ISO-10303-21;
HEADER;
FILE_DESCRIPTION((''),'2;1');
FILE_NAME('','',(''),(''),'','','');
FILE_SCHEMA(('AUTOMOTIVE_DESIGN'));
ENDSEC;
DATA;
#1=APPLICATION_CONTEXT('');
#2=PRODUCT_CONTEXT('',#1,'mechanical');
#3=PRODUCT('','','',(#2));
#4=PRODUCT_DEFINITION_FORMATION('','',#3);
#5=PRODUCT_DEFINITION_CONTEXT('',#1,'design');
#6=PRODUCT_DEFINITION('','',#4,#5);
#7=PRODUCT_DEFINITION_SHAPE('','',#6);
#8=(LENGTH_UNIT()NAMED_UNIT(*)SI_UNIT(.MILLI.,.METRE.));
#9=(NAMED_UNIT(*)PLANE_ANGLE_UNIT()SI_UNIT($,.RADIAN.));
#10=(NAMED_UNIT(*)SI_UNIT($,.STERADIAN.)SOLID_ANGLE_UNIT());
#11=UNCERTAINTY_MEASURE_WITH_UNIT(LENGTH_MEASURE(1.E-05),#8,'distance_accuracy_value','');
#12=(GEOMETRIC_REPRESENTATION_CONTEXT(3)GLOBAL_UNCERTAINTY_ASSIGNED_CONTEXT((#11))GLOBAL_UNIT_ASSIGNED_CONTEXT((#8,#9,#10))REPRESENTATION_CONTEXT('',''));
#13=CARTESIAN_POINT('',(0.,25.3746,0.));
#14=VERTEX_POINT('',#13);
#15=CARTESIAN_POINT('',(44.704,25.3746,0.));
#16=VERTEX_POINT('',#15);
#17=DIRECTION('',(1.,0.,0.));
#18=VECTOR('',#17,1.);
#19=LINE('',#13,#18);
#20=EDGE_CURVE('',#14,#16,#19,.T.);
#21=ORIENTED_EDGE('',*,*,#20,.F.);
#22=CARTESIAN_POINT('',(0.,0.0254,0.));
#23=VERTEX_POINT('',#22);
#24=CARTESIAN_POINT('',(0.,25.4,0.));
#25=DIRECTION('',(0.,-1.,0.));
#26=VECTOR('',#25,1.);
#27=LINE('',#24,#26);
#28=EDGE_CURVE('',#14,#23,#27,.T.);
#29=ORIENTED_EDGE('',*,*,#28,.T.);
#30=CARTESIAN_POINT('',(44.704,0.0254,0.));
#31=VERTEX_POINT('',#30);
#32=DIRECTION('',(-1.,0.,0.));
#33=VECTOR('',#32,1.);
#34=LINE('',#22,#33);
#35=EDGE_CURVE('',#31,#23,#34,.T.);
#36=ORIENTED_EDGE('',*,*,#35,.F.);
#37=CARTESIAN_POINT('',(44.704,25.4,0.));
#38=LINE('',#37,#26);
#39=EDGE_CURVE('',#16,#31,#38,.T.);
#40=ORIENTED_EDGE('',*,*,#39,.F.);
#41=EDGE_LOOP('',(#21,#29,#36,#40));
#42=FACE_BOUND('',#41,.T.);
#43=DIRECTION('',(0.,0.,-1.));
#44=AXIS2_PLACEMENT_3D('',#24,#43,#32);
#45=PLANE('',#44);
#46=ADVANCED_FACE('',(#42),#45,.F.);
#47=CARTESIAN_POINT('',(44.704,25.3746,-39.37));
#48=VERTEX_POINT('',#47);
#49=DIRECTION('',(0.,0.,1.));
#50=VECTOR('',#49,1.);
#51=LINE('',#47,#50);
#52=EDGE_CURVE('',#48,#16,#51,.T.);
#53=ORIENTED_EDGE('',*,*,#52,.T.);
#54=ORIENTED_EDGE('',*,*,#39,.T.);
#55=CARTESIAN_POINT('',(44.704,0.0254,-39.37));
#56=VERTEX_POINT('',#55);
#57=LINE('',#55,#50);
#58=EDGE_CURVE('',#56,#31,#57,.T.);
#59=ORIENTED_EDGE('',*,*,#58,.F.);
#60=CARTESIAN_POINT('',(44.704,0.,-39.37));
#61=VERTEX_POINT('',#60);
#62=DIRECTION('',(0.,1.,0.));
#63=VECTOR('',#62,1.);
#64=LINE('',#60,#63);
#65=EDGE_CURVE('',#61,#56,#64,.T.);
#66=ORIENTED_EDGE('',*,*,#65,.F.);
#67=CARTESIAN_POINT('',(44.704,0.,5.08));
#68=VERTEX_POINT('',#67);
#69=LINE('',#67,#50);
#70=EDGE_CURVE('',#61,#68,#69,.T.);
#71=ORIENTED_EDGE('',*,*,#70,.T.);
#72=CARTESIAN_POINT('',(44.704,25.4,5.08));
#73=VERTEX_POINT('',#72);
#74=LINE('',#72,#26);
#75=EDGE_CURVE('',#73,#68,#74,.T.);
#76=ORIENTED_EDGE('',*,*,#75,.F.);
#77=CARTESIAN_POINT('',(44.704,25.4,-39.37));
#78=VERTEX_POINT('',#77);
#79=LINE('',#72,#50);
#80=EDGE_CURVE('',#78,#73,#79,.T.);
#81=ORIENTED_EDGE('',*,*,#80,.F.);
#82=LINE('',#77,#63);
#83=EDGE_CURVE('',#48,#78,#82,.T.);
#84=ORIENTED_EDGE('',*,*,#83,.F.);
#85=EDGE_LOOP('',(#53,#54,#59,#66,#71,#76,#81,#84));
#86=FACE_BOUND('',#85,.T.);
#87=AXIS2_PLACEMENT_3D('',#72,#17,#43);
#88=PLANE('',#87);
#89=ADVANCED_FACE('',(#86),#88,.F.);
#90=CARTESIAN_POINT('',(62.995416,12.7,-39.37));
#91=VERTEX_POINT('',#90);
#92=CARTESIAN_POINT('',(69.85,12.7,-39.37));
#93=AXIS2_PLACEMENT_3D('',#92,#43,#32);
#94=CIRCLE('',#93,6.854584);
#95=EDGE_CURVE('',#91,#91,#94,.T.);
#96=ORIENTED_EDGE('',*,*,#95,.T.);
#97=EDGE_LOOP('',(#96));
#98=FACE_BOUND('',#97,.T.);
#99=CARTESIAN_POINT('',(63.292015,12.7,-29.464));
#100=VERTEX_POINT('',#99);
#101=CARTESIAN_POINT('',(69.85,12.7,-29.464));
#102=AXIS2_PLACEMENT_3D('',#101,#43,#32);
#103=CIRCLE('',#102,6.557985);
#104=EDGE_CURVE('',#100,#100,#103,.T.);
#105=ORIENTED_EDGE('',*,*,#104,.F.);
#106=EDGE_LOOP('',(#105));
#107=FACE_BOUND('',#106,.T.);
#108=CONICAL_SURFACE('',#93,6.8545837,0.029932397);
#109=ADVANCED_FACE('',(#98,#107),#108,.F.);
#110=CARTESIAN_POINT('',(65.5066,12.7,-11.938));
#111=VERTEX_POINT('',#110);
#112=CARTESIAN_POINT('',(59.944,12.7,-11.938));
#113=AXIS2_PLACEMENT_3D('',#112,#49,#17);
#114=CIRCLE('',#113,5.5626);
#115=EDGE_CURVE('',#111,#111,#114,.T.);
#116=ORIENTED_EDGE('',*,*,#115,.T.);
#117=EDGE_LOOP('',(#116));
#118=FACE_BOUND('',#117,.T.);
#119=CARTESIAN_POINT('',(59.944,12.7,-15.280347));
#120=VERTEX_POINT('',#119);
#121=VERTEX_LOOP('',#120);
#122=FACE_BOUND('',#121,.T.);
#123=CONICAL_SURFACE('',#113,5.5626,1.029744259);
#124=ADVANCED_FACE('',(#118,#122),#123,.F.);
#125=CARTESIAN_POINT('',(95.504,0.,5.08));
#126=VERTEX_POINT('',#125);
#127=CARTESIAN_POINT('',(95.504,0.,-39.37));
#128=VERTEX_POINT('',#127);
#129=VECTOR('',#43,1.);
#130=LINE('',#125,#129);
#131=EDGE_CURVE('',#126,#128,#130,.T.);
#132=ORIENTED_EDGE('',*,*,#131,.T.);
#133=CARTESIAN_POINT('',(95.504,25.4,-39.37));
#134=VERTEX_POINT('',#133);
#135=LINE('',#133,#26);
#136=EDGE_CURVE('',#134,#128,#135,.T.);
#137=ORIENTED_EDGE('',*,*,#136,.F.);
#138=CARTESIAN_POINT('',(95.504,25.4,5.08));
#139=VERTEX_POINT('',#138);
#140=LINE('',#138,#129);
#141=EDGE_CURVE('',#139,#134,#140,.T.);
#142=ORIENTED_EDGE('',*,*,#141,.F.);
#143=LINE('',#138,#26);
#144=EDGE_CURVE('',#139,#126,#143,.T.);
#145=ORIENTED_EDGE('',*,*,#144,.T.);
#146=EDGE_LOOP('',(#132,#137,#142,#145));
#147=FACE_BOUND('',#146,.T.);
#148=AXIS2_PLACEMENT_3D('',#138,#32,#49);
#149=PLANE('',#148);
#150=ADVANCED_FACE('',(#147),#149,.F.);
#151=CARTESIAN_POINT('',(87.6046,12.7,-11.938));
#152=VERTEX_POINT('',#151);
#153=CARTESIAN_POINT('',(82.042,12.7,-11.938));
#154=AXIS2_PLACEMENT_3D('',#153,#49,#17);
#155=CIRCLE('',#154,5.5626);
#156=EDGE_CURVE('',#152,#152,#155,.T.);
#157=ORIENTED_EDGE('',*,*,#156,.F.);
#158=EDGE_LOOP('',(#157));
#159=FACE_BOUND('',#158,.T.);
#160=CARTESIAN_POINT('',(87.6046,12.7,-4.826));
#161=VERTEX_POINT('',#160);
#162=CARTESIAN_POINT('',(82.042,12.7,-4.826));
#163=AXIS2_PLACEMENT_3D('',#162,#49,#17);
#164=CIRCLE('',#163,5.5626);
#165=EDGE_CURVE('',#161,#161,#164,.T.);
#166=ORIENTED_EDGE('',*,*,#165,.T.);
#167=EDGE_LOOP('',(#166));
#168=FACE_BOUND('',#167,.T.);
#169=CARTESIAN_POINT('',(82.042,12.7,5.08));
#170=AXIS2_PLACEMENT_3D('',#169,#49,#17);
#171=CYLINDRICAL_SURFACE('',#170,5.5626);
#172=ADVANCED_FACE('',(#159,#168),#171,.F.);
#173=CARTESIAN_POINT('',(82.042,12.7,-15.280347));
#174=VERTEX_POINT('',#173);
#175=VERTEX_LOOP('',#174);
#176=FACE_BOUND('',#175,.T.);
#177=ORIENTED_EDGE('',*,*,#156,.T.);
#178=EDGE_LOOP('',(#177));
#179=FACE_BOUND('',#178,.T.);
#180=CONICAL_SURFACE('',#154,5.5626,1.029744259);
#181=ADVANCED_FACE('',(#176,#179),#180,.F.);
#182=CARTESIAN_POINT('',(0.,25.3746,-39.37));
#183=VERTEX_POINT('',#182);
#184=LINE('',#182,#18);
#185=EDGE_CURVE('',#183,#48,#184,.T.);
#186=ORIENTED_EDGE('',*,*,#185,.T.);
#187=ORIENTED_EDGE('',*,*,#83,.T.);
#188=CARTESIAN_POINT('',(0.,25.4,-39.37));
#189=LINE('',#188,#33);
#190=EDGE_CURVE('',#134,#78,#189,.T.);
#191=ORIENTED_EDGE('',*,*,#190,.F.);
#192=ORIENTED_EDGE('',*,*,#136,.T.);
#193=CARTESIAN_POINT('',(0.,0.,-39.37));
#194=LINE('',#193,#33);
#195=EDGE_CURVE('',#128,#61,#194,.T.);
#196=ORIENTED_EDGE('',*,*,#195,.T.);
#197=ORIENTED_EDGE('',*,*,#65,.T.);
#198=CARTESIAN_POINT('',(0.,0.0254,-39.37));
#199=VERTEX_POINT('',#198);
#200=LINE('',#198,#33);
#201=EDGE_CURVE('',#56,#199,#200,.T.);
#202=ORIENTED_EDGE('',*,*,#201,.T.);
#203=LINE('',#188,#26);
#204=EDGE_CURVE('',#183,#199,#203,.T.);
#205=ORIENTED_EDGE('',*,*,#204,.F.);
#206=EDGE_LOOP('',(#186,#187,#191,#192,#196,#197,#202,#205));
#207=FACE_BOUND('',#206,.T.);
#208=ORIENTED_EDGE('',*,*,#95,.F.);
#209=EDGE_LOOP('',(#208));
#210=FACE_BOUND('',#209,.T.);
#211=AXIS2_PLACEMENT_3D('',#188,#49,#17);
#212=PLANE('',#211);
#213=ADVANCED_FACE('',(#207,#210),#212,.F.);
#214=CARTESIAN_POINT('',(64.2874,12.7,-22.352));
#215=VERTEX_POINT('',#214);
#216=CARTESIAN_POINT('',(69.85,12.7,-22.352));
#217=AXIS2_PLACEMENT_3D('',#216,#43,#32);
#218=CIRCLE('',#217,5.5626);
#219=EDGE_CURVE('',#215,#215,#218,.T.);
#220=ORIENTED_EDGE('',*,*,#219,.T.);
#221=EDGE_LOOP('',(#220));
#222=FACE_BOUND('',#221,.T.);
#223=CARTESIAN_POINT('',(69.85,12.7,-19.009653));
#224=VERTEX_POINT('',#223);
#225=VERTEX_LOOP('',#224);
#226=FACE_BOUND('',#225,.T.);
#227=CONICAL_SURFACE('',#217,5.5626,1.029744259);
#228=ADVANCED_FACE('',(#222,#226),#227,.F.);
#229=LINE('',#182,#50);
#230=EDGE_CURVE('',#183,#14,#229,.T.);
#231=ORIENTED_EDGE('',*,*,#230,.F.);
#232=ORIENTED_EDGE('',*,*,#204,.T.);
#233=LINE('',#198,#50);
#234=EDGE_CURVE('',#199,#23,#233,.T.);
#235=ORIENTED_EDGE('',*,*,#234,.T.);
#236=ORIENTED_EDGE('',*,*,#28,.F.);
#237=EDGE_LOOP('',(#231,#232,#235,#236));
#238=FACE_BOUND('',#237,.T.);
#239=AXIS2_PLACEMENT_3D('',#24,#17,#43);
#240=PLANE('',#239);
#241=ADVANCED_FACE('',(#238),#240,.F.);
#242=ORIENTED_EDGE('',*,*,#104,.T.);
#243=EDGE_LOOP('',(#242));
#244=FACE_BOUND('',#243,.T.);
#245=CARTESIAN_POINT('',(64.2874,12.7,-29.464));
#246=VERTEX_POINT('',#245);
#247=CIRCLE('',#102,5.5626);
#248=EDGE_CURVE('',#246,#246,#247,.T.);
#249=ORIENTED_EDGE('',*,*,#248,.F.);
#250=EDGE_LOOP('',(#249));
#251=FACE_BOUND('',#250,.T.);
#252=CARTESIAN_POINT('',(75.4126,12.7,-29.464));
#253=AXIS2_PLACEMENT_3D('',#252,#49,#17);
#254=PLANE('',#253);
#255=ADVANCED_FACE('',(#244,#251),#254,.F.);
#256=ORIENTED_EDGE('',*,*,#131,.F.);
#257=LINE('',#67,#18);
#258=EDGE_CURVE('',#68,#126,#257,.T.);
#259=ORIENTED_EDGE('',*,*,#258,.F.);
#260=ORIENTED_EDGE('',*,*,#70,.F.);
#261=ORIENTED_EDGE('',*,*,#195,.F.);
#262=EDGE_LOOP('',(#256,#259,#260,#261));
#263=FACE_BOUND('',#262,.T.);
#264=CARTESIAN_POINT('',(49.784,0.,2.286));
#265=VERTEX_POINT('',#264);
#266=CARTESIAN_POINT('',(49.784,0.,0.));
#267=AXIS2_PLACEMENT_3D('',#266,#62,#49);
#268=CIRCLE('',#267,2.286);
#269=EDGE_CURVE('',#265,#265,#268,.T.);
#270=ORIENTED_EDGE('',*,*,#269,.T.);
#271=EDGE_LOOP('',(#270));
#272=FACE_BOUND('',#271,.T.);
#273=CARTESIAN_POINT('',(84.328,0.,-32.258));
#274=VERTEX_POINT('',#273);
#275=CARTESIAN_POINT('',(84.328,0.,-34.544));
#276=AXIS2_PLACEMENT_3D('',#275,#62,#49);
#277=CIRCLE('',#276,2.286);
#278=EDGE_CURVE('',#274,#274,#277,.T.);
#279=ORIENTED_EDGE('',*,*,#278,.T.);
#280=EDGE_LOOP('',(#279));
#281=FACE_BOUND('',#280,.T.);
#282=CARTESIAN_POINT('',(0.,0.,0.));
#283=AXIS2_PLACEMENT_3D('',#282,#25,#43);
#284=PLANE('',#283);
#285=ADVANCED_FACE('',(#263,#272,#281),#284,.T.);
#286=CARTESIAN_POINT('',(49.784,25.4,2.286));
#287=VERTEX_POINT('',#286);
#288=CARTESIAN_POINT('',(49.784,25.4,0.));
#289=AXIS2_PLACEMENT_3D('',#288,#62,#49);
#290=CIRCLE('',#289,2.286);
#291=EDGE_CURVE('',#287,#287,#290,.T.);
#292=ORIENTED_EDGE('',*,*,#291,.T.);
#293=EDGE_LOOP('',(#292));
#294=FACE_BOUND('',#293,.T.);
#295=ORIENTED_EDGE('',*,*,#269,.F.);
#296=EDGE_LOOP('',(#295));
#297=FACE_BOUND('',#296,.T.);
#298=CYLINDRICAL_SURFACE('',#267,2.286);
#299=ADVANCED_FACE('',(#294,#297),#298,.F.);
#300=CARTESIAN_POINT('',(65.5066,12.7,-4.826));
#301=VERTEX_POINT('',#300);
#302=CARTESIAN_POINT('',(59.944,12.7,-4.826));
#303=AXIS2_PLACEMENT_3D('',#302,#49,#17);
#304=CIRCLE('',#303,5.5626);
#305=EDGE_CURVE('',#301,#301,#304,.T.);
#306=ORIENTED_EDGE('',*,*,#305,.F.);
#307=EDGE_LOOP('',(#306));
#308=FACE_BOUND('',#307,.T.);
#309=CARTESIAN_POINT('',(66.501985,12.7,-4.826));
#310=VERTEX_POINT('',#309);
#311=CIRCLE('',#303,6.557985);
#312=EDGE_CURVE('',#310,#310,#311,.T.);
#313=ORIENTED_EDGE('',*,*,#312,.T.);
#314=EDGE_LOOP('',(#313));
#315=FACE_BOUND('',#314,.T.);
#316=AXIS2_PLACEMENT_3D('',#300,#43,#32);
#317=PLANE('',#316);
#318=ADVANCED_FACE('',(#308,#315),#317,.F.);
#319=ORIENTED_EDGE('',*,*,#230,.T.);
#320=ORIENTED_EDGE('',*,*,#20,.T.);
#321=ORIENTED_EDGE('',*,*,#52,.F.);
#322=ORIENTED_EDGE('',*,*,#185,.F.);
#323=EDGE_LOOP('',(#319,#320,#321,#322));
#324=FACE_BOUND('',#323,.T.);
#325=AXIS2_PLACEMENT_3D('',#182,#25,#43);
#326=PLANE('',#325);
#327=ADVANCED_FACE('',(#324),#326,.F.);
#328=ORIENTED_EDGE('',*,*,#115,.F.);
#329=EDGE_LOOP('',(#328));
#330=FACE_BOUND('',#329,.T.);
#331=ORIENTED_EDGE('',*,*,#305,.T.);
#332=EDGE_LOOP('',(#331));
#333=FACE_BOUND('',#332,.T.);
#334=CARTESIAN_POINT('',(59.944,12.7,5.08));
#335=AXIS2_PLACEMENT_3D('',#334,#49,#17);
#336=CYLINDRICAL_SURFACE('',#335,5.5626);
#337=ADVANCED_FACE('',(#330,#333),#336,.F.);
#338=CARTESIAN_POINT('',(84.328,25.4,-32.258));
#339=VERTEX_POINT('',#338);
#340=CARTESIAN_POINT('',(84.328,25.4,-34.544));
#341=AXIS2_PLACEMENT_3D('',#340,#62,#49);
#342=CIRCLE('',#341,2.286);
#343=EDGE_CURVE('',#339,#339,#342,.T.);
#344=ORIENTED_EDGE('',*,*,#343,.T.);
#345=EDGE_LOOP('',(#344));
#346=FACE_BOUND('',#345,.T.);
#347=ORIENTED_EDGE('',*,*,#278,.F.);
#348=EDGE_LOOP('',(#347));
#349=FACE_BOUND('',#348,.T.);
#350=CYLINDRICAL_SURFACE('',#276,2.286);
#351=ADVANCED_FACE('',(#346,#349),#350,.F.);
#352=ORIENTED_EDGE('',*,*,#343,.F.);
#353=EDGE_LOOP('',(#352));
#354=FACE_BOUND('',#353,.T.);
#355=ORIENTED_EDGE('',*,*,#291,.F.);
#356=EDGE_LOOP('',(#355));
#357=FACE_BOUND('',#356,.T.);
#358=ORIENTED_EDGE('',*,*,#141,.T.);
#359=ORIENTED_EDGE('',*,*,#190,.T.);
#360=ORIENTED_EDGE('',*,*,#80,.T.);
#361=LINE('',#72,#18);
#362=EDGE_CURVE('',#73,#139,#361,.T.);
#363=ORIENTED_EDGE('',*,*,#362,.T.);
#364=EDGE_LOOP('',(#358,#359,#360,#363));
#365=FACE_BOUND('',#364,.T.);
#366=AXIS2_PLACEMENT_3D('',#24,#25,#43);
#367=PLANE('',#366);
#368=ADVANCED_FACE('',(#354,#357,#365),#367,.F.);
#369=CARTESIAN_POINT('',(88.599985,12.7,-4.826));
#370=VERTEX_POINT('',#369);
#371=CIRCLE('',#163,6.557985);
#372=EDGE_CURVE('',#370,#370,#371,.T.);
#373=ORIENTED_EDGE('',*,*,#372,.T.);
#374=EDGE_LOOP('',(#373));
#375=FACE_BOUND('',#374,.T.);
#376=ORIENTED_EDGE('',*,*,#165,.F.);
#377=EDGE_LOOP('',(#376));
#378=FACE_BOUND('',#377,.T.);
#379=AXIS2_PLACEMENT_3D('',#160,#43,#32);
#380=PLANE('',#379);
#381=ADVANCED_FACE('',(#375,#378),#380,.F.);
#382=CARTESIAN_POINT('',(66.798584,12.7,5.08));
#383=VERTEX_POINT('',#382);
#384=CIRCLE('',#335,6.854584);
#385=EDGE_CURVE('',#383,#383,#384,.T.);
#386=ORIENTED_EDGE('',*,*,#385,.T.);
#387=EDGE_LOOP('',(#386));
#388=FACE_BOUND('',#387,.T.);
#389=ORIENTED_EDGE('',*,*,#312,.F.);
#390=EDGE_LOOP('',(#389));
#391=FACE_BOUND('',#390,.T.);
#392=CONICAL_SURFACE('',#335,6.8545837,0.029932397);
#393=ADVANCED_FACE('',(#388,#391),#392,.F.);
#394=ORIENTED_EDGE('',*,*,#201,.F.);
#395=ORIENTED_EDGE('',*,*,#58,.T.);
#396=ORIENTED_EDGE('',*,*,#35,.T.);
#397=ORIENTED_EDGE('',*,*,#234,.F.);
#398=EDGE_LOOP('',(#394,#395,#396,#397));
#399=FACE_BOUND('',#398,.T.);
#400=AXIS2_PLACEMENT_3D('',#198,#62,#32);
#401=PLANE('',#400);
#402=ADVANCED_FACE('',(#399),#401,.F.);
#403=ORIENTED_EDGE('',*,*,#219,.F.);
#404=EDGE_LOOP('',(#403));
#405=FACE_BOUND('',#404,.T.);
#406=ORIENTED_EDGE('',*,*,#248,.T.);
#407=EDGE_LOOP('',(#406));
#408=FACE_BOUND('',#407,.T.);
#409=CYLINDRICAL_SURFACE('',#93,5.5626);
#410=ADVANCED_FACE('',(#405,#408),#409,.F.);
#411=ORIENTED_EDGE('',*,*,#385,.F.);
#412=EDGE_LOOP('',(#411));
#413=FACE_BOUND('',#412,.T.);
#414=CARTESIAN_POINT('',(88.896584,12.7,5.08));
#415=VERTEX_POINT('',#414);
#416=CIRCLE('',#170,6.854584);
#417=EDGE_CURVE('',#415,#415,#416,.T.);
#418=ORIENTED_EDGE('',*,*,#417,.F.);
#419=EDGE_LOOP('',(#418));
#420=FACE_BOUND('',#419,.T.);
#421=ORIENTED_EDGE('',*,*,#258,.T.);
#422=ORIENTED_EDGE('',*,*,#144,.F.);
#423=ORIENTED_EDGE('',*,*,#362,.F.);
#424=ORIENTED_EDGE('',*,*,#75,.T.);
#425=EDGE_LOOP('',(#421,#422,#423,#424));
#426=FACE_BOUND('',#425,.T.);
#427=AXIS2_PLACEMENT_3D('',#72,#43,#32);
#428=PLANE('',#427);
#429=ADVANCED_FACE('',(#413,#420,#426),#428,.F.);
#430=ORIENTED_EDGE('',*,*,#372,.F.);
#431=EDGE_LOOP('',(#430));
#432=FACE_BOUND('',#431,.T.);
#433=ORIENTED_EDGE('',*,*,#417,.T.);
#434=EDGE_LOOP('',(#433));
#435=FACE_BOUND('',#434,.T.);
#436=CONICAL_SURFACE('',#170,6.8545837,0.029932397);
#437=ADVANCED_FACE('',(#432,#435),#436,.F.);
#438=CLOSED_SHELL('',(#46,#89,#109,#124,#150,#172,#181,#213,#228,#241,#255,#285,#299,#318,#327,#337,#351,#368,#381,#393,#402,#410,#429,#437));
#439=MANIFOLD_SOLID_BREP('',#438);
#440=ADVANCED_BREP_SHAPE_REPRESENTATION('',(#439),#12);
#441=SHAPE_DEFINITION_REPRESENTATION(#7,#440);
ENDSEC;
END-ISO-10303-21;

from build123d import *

# Parameters (mm, degrees)
BOSS_EXTRUDE1_DEPTH = 25.4
SKETCH2_W           = 44.704
SKETCH2_H           = 0.0254
CUT_EXTRUDE1_DEPTH  = 107.377492525
SKETCH3_R           = 2.286
CUT_EXTRUDE2_DEPTH  = 107.377492525


# Read off the part's stored shape, not the designer's step: 1/4 NPT Tapped Hole1
with BuildPart() as part:
    # Sketch1 → Boss-Extrude1 (new body)
    with BuildSketch(Plane(origin=(0, 0, 0), x_dir=(1, 0, 0), z_dir=(0, 1, 0))):
        Polygon((44.704, -5.08), (95.504, -5.08), (95.504, 39.37), (0, 39.37), (0, 0), (44.704, 0), align=None)
    extrude(amount=BOSS_EXTRUDE1_DEPTH)

    # Sketch2 → Cut-Extrude1 (cut, through all)
    with BuildSketch(Plane.XY):
        with Locations((22.352, 25.3873)):
            Rectangle(SKETCH2_W, SKETCH2_H)
        with Locations((22.352, 0.0127)):
            Rectangle(SKETCH2_W, SKETCH2_H)
    extrude(amount=-CUT_EXTRUDE1_DEPTH, mode=Mode.SUBTRACT)

    # Sketch3 → Cut-Extrude2 (cut, through all)
    with BuildSketch(Plane(origin=(0, 25.4, 0), x_dir=(1, 0, 0), z_dir=(0, 1, 0))):
        with Locations(Location((49.784, 0, 0), (0, 0, 270))):
            Circle(SKETCH3_R)
        with Locations(Location((84.328, 34.544, 0), (0, 0, 270))):
            Circle(SKETCH3_R)
    extrude(amount=-CUT_EXTRUDE2_DEPTH, mode=Mode.SUBTRACT)

    # 1/4 NPT Tapped Hole1 outline → 1/4 NPT Tapped Hole1 (revolve, cut)
    with BuildSketch(Plane(origin=(69.85, 12.7, 0), x_dir=(1, 0, 0), z_dir=(0, -1, 0))):
        Polygon((5.5626, -22.352), (0, -19.009652721), (0, -39.37), (6.8545837, -39.37), (6.557984794, -29.464), (5.5626, -29.464), align=None)
    revolve(axis=Axis((69.85, 12.7, 0), (0, 0, 1)), mode=Mode.SUBTRACT)

    # 1_4 NPT Tapped Hole1 2 outline → 1_4 NPT Tapped Hole1 2 (revolve, cut)
    with BuildSketch(Plane(origin=(82.042, 12.7, 0), x_dir=(1, 0, 0), z_dir=(0, -1, 0))):
        Polygon((0, 5.08), (0, -15.280347279), (5.5626, -11.938), (5.5626, -4.826), (6.557984794, -4.826), (6.8545837, 5.08), align=None)
    revolve(axis=Axis((82.042, 12.7, 0), (0, 0, 1)), mode=Mode.SUBTRACT)

    # 1_4 NPT Tapped Hole1 3 outline → 1_4 NPT Tapped Hole1 3 (revolve, cut)
    with BuildSketch(Plane(origin=(59.944, 12.7, 0), x_dir=(1, 0, 0), z_dir=(0, -1, 0))):
        Polygon((6.8545837, 5.08), (0, 5.08), (0, -15.280347279), (5.5626, -11.938), (5.5626, -4.826), (6.557984794, -4.826), align=None)
    revolve(axis=Axis((59.944, 12.7, 0), (0, 0, 1)), mode=Mode.SUBTRACT)


solid = part.part
